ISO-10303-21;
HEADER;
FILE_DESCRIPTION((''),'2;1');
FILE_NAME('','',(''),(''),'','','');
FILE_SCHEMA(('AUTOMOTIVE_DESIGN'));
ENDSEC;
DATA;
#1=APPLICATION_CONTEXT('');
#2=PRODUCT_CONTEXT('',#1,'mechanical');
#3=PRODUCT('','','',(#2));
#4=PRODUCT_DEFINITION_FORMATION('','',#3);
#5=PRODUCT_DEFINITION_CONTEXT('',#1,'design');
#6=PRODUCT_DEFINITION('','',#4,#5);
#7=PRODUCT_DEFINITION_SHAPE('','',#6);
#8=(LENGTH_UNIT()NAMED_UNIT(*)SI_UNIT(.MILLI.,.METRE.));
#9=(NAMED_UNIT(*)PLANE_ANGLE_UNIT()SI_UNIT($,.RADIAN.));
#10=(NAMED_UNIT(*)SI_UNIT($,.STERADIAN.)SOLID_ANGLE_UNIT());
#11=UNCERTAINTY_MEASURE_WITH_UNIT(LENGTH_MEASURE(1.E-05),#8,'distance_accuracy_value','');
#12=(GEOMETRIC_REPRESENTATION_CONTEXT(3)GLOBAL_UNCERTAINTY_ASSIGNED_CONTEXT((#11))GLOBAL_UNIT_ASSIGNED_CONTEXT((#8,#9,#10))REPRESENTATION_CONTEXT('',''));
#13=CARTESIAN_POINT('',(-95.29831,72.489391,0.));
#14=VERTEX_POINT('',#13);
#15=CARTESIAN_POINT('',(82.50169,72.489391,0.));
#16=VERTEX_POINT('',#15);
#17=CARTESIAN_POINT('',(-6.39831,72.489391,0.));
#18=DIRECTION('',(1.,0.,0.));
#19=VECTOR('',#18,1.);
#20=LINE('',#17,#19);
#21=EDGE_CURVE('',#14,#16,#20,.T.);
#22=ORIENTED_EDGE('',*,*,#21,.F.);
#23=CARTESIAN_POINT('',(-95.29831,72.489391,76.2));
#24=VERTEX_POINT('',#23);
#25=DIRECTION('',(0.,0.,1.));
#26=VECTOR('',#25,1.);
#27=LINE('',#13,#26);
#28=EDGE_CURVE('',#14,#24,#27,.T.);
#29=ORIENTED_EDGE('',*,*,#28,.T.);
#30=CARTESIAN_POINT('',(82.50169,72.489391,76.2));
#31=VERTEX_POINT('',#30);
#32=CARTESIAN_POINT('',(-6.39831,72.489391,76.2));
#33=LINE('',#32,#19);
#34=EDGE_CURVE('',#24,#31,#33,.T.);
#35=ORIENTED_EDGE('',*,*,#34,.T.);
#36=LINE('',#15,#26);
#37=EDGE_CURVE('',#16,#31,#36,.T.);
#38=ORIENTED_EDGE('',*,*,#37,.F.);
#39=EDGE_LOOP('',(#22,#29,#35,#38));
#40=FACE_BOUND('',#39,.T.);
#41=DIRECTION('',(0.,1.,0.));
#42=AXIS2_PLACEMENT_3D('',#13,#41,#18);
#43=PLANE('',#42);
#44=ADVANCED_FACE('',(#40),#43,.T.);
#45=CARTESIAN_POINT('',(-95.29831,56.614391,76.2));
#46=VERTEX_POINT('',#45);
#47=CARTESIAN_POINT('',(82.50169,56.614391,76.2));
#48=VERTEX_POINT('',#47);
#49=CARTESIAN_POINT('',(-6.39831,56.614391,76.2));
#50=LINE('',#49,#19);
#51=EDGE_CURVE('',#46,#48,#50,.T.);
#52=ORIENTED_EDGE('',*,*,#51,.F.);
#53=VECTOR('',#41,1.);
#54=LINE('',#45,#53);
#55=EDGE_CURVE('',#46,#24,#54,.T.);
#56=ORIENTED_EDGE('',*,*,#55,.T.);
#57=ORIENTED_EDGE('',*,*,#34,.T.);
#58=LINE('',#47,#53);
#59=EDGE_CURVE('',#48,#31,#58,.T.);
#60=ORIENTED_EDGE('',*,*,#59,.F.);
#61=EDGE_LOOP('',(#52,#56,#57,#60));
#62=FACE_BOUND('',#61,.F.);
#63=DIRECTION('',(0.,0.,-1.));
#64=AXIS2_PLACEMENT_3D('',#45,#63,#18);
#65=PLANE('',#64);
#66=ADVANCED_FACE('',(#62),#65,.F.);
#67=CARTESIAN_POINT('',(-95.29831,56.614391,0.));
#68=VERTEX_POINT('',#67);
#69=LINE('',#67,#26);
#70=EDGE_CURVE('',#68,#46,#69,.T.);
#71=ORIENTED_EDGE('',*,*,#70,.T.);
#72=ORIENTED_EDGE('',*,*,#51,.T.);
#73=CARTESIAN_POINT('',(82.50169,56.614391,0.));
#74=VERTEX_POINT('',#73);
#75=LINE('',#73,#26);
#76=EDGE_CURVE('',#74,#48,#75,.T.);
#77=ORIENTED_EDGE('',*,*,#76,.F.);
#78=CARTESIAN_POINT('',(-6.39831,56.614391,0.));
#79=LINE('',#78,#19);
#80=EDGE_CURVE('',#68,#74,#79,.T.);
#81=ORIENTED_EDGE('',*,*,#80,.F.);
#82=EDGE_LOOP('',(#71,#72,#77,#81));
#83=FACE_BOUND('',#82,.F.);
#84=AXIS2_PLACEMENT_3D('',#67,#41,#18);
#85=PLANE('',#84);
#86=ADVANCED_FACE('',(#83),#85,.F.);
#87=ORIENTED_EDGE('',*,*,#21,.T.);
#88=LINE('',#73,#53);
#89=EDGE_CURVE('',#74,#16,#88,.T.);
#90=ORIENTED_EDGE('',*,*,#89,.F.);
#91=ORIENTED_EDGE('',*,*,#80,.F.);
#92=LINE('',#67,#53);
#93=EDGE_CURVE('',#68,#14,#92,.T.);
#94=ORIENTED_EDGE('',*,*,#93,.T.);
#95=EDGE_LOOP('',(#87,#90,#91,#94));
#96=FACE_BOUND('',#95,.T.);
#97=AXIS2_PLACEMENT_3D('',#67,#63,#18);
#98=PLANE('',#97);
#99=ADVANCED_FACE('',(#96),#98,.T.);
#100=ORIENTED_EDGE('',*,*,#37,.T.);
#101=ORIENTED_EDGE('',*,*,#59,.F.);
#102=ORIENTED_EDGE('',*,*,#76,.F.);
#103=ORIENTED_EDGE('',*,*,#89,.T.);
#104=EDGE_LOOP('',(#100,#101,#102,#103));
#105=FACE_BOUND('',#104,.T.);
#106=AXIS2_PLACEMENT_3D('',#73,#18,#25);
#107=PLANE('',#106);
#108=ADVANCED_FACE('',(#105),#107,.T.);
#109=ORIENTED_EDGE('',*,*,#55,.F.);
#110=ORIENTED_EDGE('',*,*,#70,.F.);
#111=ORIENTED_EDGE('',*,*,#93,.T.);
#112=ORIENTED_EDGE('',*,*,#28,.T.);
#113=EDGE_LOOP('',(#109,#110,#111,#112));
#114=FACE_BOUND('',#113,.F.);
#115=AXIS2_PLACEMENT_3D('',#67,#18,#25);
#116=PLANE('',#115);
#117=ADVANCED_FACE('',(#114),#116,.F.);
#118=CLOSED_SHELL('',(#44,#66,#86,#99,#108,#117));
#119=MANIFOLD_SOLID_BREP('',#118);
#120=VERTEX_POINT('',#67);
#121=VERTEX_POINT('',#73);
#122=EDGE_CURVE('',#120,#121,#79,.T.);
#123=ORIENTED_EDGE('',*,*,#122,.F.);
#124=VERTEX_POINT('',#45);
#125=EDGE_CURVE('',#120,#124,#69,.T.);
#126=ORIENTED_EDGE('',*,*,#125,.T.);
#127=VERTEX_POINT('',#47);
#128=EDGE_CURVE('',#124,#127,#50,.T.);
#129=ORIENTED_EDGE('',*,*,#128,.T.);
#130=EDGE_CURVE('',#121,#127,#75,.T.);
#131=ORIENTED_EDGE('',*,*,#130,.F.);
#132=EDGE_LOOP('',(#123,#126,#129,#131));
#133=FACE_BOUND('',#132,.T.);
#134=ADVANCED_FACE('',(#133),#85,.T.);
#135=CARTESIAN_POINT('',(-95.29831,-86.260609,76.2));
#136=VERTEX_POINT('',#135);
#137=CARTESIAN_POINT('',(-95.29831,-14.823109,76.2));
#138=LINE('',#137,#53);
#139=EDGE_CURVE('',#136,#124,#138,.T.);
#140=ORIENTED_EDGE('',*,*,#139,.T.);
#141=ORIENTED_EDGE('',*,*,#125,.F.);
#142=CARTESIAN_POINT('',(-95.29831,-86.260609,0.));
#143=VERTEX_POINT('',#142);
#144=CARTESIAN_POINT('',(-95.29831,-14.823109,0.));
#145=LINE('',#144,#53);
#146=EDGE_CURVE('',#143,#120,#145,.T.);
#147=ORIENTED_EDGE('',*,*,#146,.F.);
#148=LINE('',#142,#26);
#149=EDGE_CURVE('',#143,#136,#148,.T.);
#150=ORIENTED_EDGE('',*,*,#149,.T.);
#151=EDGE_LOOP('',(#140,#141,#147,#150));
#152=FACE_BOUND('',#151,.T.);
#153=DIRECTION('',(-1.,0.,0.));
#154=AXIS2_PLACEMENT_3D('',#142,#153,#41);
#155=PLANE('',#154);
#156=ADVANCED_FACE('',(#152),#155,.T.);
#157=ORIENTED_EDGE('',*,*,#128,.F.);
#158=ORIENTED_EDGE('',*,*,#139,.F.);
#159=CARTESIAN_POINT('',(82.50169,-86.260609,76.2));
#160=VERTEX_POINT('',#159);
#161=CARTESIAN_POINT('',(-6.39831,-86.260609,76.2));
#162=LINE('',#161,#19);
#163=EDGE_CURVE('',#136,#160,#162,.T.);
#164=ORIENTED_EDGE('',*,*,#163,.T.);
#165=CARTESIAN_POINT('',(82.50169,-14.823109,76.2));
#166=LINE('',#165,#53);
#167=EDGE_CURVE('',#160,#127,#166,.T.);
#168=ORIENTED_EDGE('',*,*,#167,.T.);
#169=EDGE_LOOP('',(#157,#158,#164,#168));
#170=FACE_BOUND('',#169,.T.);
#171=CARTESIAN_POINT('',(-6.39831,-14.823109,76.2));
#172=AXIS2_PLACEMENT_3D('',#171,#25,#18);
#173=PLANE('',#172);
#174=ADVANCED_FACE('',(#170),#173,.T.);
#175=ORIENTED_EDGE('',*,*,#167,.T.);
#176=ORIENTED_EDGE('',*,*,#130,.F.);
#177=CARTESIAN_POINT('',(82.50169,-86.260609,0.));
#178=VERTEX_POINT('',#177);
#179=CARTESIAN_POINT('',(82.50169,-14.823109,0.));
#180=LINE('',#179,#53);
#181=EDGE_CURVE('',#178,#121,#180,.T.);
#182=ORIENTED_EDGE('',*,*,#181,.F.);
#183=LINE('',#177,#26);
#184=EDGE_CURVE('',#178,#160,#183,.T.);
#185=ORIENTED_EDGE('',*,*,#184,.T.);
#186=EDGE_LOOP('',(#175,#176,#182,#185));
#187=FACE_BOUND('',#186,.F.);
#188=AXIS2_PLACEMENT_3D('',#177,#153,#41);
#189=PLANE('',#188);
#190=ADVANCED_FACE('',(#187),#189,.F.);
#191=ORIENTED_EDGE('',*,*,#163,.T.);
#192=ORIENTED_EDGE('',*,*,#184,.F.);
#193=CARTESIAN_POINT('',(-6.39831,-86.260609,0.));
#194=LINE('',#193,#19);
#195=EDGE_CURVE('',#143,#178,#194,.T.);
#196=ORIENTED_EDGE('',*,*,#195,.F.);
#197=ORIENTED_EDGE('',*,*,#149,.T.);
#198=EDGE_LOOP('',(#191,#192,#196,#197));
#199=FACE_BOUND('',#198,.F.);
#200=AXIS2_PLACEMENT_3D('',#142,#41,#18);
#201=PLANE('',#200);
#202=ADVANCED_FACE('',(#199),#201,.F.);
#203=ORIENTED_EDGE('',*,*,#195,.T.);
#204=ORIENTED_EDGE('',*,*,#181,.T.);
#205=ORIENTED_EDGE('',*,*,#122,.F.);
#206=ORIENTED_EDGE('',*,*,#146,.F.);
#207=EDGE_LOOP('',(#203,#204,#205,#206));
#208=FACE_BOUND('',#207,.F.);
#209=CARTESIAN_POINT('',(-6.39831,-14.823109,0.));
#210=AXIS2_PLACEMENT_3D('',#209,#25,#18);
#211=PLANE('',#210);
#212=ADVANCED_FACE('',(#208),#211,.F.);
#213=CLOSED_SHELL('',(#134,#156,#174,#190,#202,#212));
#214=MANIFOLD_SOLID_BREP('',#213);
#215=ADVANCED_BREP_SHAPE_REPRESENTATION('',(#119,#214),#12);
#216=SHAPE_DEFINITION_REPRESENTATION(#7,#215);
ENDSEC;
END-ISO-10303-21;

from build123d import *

# Parameters (mm, degrees)
F0_W     = 177.8
F0_H     = 142.875
F1_DEPTH = 76.2
F2_DEPTH = 15.875


# Not quite as in the source:
# - a length typed as a fraction of an inch, garbled in the dataset ("3 / 203.2 mm" for 3/8 in), is restored


with BuildPart() as f1:
    # F0 (on Top) → F1 (new body)
    with BuildSketch(Plane.XY):
        with Locations((-6.3983104533, -14.8231089294)):
            Rectangle(F0_W, F0_H)
    extrude(amount=F1_DEPTH)


with BuildPart() as f2:
    # F2 (new): a face of the model
    f2_faces = [f1.part.faces().sort_by_distance(p)[0] for p in [
        (-6.3983104533, 56.6143910706, 38.1),
    ]]
    extrude(f2_faces, amount=F2_DEPTH)


solid = Compound([f1.part, f2.part])
